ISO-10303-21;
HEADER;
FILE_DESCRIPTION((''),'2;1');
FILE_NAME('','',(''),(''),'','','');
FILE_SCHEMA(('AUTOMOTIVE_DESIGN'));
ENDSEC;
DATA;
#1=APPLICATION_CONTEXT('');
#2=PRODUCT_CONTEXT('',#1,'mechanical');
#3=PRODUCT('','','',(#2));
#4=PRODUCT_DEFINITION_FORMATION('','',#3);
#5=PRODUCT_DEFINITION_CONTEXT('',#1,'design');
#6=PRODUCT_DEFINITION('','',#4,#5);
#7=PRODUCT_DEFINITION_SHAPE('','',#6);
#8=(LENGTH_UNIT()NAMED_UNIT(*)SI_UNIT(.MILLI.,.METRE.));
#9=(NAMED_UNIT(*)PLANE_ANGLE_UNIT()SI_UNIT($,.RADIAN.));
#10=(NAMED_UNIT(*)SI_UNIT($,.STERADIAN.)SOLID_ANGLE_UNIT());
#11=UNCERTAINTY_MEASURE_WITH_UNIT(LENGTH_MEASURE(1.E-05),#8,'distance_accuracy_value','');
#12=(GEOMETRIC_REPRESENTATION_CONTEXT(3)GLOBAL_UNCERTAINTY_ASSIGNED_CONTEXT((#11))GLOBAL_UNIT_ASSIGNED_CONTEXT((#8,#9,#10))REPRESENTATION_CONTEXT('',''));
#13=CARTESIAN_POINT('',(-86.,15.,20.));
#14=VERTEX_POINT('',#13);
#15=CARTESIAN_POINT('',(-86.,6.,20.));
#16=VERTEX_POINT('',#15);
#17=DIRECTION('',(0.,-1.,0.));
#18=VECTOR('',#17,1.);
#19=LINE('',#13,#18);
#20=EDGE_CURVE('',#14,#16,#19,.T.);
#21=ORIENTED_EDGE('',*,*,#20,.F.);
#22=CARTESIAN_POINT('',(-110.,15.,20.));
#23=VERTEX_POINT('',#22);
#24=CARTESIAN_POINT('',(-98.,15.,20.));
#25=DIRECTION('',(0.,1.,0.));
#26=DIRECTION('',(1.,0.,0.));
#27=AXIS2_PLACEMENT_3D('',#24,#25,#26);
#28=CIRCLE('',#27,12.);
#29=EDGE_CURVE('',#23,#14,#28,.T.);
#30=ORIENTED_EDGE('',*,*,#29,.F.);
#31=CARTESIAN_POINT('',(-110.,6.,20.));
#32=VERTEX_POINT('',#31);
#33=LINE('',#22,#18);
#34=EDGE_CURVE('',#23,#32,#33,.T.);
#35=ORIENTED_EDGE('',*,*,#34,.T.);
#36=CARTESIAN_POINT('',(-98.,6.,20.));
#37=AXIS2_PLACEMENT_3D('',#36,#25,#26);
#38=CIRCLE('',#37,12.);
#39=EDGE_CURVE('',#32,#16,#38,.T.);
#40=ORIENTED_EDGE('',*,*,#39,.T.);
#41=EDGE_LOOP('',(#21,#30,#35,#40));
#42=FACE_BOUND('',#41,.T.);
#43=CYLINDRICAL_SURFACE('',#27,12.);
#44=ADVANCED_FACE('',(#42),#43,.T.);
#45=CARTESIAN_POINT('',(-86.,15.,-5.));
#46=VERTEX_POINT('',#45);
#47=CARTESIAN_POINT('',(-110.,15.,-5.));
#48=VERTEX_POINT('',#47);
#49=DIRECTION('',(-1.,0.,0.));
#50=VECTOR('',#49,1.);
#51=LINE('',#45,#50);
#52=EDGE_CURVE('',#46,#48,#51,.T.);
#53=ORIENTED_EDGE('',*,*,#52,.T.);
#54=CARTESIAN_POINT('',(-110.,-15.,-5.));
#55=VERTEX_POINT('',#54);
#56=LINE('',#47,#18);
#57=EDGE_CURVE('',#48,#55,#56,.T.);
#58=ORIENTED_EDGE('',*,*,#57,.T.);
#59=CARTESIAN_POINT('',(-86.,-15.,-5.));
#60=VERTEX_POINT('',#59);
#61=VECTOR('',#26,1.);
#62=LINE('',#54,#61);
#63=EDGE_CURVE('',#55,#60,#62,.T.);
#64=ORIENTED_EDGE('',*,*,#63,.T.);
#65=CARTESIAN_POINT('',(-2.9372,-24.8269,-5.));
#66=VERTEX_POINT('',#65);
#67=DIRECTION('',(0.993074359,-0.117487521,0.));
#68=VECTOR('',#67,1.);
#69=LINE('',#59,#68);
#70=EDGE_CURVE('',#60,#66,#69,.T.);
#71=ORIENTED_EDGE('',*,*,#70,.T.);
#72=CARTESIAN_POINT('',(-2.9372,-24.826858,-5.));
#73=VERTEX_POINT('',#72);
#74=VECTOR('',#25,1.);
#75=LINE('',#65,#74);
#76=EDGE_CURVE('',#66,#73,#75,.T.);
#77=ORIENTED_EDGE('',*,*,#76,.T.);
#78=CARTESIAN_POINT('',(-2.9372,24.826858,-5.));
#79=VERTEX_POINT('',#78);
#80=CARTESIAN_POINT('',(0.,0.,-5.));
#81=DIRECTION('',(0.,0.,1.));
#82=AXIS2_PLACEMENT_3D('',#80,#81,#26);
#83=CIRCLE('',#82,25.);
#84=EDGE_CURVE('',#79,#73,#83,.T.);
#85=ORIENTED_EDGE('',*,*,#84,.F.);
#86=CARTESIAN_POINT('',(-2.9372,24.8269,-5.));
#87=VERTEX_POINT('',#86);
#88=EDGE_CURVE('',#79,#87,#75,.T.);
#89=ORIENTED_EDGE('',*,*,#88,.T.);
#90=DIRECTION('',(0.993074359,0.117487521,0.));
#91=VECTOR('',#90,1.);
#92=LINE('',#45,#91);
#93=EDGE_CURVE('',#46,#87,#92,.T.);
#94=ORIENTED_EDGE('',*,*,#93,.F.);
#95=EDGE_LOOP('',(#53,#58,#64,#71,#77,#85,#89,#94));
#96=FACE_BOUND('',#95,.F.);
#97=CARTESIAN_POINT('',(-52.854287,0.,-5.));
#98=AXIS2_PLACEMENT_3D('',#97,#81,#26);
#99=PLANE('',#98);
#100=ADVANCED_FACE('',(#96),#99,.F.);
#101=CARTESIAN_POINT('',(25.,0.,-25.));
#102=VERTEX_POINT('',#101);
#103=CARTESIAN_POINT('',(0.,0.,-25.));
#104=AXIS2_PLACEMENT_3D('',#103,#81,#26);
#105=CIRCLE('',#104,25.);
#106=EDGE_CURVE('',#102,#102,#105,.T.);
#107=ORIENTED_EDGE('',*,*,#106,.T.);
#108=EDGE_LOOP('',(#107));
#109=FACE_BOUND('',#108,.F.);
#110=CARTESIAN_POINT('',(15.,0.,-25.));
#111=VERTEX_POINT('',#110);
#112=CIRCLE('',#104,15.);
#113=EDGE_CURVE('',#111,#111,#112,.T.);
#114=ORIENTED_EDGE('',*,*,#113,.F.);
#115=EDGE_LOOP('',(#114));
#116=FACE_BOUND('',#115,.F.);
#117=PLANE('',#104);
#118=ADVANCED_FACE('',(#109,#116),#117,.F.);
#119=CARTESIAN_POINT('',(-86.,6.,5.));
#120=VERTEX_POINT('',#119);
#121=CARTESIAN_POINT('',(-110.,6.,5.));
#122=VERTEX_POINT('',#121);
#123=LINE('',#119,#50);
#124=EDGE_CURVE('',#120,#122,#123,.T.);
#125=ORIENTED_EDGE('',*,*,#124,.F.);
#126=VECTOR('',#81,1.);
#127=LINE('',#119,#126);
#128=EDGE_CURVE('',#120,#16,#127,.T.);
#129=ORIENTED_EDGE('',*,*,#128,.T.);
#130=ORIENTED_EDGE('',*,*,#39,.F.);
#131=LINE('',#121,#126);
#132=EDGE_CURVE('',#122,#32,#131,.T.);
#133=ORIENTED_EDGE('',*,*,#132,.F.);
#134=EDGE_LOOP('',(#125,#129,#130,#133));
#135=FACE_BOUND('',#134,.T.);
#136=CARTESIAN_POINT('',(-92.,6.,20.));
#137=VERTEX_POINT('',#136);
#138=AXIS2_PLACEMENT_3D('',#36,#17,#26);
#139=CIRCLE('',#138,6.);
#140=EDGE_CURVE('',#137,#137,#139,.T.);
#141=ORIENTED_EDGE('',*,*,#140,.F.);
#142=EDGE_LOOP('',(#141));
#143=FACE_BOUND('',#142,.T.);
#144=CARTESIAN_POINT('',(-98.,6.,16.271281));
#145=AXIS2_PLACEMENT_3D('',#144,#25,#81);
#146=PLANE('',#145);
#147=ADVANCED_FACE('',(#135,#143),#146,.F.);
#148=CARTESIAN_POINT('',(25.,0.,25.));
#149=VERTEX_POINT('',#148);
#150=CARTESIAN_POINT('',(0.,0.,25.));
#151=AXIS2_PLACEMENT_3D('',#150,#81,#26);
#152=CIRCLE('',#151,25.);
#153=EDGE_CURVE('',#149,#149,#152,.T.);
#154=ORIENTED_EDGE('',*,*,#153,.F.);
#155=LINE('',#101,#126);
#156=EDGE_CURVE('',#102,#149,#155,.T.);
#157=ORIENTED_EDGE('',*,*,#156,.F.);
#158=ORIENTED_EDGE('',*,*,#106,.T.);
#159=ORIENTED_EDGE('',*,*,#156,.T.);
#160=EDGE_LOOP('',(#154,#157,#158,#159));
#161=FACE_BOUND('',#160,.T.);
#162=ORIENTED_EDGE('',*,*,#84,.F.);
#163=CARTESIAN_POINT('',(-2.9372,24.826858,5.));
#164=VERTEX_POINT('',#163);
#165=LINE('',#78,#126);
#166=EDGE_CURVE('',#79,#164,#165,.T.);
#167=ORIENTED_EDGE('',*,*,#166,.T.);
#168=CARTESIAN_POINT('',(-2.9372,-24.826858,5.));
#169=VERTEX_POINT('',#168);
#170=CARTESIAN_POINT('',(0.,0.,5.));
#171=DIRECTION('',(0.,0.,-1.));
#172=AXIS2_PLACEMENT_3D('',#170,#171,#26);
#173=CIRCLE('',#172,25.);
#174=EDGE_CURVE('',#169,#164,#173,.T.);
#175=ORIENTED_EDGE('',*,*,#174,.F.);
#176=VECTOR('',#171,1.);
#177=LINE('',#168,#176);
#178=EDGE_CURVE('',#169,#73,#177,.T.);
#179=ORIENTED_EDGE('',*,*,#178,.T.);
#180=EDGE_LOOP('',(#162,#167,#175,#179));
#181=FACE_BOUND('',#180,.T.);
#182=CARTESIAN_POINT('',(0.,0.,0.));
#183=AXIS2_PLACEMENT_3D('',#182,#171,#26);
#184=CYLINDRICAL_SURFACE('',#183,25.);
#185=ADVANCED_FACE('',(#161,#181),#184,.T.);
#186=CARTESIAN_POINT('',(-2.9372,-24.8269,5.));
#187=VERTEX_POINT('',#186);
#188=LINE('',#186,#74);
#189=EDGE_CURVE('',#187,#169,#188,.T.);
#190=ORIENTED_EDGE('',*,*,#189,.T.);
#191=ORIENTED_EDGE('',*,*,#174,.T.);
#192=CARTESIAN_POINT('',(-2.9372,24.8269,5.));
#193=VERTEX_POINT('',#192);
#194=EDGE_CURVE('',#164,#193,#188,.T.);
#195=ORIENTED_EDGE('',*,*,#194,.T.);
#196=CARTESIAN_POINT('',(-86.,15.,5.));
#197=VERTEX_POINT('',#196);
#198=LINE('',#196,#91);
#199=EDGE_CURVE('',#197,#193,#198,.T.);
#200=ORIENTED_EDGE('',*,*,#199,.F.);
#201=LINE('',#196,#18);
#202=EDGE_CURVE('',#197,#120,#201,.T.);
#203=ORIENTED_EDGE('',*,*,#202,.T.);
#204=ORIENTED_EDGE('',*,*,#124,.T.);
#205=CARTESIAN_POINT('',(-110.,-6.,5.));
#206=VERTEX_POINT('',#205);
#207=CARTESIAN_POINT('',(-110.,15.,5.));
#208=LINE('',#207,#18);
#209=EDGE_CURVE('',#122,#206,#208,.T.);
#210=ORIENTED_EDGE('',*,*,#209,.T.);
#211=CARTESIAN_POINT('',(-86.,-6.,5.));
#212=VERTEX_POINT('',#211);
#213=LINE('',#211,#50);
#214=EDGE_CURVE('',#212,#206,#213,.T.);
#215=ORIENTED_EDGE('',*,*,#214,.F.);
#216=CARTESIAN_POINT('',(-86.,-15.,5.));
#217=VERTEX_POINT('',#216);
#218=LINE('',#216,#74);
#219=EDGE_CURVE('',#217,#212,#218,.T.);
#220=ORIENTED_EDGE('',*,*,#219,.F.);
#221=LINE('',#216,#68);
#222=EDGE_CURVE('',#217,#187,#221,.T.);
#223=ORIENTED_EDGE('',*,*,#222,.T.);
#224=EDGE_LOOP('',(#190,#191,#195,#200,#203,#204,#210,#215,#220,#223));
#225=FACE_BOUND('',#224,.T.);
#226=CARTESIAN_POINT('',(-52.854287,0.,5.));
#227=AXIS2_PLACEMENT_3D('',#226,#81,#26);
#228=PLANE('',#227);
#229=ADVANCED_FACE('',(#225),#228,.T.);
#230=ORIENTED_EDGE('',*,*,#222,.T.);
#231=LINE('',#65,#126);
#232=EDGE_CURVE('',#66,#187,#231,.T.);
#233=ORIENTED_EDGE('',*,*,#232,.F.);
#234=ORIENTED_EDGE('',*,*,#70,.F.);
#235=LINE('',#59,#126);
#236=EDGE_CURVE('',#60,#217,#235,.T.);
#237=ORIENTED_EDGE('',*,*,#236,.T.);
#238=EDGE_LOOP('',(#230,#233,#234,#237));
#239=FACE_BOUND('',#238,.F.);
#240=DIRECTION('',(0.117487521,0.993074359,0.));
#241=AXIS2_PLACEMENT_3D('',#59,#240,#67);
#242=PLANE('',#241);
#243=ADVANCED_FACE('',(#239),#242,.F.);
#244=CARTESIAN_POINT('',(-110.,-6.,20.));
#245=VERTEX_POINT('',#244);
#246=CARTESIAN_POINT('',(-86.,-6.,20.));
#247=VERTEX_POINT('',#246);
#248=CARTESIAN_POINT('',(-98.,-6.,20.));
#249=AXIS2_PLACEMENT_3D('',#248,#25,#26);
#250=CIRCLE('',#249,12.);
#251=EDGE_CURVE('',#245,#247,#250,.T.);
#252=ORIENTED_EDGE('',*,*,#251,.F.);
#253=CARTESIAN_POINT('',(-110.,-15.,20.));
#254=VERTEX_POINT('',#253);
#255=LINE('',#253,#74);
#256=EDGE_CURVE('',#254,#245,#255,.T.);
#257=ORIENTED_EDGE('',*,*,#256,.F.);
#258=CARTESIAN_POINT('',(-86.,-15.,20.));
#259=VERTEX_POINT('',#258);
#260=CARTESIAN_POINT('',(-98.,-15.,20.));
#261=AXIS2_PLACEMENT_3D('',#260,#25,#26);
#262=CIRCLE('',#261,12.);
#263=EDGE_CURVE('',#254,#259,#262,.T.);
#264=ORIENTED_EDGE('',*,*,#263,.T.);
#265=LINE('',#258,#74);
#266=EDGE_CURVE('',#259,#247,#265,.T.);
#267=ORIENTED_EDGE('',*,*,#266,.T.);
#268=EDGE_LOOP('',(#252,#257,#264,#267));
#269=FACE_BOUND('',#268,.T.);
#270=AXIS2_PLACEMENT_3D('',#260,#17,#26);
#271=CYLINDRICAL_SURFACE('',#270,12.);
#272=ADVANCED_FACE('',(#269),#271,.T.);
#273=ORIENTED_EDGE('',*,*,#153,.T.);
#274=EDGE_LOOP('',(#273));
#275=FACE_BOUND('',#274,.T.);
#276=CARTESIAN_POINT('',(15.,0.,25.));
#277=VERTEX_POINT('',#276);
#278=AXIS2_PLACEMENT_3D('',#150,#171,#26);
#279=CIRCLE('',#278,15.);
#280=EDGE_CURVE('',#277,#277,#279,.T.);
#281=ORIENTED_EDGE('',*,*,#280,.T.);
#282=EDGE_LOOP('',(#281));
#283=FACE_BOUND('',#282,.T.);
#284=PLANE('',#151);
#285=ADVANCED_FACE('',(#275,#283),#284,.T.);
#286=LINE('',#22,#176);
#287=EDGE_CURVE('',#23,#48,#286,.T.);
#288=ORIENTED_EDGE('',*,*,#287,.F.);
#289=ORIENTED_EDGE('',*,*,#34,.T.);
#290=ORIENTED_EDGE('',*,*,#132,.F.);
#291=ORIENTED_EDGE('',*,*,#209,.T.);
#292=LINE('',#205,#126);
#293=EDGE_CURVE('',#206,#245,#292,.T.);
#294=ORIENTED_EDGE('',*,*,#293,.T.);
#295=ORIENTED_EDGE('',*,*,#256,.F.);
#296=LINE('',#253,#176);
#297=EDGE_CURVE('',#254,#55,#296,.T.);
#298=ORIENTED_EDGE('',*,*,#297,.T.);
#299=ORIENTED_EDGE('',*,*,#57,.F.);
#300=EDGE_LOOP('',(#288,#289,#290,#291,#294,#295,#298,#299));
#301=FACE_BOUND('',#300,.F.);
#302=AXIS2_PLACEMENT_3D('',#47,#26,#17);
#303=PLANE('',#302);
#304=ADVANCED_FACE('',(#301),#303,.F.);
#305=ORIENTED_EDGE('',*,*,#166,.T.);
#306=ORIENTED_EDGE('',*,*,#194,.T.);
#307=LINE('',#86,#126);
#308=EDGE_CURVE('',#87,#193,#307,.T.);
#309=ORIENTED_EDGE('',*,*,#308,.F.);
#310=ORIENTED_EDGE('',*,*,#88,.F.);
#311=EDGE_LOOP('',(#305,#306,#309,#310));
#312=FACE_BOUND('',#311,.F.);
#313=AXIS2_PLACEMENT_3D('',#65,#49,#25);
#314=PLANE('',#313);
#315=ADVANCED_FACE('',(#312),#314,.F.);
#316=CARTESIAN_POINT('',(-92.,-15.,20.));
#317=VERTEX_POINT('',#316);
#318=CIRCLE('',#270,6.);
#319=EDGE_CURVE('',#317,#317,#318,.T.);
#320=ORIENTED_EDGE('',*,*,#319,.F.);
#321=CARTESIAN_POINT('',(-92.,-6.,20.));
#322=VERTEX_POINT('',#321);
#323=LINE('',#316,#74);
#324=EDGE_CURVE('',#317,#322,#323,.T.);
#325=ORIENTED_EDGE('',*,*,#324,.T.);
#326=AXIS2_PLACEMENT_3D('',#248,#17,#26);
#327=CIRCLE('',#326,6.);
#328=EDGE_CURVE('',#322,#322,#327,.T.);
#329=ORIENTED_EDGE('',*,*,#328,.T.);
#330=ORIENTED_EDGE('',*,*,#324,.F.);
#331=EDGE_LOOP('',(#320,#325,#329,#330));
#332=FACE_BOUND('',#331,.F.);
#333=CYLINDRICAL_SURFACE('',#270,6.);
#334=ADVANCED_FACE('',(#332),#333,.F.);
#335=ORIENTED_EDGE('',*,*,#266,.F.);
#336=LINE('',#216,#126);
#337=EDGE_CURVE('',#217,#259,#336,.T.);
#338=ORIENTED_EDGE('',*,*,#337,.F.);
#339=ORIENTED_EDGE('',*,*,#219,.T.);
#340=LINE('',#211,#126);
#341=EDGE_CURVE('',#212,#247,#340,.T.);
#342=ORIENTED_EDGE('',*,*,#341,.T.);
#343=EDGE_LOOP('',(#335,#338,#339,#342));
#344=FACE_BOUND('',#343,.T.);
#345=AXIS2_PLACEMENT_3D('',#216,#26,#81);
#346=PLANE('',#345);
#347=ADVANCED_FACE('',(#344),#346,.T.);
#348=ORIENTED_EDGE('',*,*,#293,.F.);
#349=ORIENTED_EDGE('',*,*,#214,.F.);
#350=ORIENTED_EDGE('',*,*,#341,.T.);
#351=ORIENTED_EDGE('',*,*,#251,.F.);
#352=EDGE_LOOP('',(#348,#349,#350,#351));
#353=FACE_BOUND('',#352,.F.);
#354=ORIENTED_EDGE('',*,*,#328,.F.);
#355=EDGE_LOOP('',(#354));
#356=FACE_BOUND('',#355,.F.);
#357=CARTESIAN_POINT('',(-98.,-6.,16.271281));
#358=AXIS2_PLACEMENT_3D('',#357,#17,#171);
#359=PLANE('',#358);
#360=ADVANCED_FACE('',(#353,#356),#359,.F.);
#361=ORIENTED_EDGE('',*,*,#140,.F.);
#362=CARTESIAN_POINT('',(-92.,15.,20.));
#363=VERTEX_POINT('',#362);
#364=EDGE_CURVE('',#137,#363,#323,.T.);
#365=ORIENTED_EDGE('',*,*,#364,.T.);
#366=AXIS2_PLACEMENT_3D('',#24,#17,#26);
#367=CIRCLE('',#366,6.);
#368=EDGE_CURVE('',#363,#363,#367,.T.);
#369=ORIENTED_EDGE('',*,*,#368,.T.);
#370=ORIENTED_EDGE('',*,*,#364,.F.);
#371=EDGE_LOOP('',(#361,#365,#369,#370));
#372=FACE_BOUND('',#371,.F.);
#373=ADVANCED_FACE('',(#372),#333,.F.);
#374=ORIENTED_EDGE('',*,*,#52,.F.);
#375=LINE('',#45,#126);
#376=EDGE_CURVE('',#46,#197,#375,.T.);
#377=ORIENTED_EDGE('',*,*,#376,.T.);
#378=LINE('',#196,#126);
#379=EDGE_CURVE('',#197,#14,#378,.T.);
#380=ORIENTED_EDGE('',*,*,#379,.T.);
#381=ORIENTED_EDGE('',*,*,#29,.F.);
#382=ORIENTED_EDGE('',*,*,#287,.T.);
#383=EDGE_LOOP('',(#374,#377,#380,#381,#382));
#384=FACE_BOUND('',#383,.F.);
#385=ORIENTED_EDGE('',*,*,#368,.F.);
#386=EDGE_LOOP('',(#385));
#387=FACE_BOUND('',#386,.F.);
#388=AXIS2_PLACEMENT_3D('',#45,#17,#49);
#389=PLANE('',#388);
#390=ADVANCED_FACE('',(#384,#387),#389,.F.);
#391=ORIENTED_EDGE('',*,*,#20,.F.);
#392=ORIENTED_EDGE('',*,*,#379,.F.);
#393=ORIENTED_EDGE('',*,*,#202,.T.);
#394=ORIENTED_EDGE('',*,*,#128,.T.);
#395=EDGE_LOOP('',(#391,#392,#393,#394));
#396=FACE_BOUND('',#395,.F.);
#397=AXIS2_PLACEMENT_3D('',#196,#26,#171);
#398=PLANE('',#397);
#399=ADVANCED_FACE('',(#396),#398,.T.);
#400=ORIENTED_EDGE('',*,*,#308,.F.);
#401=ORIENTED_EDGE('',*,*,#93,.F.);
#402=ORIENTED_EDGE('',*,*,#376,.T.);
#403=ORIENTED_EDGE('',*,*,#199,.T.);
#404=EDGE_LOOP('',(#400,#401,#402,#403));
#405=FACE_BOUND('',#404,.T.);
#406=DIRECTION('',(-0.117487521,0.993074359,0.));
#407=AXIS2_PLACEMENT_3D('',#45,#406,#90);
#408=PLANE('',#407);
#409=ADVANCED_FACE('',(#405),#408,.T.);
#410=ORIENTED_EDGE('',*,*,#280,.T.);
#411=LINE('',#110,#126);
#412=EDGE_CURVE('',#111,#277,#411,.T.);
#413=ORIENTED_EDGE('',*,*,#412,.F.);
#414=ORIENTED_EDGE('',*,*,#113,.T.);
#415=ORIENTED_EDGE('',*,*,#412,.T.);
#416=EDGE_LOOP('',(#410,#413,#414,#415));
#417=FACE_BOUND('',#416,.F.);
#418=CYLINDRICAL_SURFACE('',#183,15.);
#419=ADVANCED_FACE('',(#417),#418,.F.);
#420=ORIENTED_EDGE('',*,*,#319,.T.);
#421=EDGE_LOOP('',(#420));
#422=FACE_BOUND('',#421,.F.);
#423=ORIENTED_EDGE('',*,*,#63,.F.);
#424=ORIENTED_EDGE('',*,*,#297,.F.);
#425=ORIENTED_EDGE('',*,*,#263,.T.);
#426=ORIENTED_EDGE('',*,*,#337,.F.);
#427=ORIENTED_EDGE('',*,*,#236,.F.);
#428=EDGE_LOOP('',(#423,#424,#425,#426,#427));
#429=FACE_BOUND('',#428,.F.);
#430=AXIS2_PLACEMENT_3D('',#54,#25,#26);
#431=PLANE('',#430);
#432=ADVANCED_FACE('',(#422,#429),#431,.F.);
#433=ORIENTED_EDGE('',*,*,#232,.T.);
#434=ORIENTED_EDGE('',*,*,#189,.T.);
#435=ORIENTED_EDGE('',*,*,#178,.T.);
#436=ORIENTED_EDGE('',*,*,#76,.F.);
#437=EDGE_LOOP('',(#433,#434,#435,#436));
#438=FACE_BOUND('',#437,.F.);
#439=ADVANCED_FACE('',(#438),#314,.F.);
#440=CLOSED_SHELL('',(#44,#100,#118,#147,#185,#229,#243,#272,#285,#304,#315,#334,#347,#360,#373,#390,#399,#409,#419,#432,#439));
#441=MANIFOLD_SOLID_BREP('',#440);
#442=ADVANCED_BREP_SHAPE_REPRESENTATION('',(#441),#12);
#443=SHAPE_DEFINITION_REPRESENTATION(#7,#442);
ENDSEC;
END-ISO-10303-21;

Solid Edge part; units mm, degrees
sketch "Sketch1" plane through (0, 0, 0) normal (0, 0, 1) x (1, 0, 0)
  circle A0 centre (0, 0) radius 25
extrude "Protrusion1" add sketch "Sketch1" along normal mid plane 50
sketch "Sketch2" plane through (0, 0, 0) normal (0, 0, 1) x (1, 0, 0)
  line L0 (-86, -15) -> (-2.9372, -24.8269)
  line L1 (-110, -15) -> (-86, -15)
  line L2 (-110, 15) -> (-110, -15)
  line L3 (-86, 15) -> (-110, 15)
  line L4 (-86, 15) -> (-2.9372, 24.8269)
extrude "ExtrudedProtrusion_2" add sketch "Sketch2" along normal mid plane 10 material side at (-44.4745, -19.9631, 0)
sketch "Sketch3" plane through (0, 0, 0) normal (0, 0, 1) x (1, 0, 0)
  circle A0 centre (0, 0) radius 15
extrude "Cutout1" cut sketch "Sketch3" along normal up to next and the other way up to next
sketch "Sketch4" plane through (-98, -15, 0) normal (0, -1, 0) x (1, 0, 0)
  line L0 (12, 5) -> (12, 20)
  line L1 (12, 5) -> (-12, 5)
  line L2 (-12, 5) -> (-12, 20)
  arc A0 (-12, 20) -> (12, 20) centre (0, 20) cw
extrude "ExtrudedProtrusion_3" add sketch "Sketch4" against normal blind 9
mirror "Mirror1" about plane through (0, 0, 0) normal (0, -1, 0) of "ExtrudedProtrusion_3"
sketch "Sketch5" plane through (-98, -15, 0) normal (0, -1, 0) x (1, 0, 0)
  circle A0 centre (0, 20) radius 6
extrude "Cutout2" cut sketch "Sketch5" against normal through all
